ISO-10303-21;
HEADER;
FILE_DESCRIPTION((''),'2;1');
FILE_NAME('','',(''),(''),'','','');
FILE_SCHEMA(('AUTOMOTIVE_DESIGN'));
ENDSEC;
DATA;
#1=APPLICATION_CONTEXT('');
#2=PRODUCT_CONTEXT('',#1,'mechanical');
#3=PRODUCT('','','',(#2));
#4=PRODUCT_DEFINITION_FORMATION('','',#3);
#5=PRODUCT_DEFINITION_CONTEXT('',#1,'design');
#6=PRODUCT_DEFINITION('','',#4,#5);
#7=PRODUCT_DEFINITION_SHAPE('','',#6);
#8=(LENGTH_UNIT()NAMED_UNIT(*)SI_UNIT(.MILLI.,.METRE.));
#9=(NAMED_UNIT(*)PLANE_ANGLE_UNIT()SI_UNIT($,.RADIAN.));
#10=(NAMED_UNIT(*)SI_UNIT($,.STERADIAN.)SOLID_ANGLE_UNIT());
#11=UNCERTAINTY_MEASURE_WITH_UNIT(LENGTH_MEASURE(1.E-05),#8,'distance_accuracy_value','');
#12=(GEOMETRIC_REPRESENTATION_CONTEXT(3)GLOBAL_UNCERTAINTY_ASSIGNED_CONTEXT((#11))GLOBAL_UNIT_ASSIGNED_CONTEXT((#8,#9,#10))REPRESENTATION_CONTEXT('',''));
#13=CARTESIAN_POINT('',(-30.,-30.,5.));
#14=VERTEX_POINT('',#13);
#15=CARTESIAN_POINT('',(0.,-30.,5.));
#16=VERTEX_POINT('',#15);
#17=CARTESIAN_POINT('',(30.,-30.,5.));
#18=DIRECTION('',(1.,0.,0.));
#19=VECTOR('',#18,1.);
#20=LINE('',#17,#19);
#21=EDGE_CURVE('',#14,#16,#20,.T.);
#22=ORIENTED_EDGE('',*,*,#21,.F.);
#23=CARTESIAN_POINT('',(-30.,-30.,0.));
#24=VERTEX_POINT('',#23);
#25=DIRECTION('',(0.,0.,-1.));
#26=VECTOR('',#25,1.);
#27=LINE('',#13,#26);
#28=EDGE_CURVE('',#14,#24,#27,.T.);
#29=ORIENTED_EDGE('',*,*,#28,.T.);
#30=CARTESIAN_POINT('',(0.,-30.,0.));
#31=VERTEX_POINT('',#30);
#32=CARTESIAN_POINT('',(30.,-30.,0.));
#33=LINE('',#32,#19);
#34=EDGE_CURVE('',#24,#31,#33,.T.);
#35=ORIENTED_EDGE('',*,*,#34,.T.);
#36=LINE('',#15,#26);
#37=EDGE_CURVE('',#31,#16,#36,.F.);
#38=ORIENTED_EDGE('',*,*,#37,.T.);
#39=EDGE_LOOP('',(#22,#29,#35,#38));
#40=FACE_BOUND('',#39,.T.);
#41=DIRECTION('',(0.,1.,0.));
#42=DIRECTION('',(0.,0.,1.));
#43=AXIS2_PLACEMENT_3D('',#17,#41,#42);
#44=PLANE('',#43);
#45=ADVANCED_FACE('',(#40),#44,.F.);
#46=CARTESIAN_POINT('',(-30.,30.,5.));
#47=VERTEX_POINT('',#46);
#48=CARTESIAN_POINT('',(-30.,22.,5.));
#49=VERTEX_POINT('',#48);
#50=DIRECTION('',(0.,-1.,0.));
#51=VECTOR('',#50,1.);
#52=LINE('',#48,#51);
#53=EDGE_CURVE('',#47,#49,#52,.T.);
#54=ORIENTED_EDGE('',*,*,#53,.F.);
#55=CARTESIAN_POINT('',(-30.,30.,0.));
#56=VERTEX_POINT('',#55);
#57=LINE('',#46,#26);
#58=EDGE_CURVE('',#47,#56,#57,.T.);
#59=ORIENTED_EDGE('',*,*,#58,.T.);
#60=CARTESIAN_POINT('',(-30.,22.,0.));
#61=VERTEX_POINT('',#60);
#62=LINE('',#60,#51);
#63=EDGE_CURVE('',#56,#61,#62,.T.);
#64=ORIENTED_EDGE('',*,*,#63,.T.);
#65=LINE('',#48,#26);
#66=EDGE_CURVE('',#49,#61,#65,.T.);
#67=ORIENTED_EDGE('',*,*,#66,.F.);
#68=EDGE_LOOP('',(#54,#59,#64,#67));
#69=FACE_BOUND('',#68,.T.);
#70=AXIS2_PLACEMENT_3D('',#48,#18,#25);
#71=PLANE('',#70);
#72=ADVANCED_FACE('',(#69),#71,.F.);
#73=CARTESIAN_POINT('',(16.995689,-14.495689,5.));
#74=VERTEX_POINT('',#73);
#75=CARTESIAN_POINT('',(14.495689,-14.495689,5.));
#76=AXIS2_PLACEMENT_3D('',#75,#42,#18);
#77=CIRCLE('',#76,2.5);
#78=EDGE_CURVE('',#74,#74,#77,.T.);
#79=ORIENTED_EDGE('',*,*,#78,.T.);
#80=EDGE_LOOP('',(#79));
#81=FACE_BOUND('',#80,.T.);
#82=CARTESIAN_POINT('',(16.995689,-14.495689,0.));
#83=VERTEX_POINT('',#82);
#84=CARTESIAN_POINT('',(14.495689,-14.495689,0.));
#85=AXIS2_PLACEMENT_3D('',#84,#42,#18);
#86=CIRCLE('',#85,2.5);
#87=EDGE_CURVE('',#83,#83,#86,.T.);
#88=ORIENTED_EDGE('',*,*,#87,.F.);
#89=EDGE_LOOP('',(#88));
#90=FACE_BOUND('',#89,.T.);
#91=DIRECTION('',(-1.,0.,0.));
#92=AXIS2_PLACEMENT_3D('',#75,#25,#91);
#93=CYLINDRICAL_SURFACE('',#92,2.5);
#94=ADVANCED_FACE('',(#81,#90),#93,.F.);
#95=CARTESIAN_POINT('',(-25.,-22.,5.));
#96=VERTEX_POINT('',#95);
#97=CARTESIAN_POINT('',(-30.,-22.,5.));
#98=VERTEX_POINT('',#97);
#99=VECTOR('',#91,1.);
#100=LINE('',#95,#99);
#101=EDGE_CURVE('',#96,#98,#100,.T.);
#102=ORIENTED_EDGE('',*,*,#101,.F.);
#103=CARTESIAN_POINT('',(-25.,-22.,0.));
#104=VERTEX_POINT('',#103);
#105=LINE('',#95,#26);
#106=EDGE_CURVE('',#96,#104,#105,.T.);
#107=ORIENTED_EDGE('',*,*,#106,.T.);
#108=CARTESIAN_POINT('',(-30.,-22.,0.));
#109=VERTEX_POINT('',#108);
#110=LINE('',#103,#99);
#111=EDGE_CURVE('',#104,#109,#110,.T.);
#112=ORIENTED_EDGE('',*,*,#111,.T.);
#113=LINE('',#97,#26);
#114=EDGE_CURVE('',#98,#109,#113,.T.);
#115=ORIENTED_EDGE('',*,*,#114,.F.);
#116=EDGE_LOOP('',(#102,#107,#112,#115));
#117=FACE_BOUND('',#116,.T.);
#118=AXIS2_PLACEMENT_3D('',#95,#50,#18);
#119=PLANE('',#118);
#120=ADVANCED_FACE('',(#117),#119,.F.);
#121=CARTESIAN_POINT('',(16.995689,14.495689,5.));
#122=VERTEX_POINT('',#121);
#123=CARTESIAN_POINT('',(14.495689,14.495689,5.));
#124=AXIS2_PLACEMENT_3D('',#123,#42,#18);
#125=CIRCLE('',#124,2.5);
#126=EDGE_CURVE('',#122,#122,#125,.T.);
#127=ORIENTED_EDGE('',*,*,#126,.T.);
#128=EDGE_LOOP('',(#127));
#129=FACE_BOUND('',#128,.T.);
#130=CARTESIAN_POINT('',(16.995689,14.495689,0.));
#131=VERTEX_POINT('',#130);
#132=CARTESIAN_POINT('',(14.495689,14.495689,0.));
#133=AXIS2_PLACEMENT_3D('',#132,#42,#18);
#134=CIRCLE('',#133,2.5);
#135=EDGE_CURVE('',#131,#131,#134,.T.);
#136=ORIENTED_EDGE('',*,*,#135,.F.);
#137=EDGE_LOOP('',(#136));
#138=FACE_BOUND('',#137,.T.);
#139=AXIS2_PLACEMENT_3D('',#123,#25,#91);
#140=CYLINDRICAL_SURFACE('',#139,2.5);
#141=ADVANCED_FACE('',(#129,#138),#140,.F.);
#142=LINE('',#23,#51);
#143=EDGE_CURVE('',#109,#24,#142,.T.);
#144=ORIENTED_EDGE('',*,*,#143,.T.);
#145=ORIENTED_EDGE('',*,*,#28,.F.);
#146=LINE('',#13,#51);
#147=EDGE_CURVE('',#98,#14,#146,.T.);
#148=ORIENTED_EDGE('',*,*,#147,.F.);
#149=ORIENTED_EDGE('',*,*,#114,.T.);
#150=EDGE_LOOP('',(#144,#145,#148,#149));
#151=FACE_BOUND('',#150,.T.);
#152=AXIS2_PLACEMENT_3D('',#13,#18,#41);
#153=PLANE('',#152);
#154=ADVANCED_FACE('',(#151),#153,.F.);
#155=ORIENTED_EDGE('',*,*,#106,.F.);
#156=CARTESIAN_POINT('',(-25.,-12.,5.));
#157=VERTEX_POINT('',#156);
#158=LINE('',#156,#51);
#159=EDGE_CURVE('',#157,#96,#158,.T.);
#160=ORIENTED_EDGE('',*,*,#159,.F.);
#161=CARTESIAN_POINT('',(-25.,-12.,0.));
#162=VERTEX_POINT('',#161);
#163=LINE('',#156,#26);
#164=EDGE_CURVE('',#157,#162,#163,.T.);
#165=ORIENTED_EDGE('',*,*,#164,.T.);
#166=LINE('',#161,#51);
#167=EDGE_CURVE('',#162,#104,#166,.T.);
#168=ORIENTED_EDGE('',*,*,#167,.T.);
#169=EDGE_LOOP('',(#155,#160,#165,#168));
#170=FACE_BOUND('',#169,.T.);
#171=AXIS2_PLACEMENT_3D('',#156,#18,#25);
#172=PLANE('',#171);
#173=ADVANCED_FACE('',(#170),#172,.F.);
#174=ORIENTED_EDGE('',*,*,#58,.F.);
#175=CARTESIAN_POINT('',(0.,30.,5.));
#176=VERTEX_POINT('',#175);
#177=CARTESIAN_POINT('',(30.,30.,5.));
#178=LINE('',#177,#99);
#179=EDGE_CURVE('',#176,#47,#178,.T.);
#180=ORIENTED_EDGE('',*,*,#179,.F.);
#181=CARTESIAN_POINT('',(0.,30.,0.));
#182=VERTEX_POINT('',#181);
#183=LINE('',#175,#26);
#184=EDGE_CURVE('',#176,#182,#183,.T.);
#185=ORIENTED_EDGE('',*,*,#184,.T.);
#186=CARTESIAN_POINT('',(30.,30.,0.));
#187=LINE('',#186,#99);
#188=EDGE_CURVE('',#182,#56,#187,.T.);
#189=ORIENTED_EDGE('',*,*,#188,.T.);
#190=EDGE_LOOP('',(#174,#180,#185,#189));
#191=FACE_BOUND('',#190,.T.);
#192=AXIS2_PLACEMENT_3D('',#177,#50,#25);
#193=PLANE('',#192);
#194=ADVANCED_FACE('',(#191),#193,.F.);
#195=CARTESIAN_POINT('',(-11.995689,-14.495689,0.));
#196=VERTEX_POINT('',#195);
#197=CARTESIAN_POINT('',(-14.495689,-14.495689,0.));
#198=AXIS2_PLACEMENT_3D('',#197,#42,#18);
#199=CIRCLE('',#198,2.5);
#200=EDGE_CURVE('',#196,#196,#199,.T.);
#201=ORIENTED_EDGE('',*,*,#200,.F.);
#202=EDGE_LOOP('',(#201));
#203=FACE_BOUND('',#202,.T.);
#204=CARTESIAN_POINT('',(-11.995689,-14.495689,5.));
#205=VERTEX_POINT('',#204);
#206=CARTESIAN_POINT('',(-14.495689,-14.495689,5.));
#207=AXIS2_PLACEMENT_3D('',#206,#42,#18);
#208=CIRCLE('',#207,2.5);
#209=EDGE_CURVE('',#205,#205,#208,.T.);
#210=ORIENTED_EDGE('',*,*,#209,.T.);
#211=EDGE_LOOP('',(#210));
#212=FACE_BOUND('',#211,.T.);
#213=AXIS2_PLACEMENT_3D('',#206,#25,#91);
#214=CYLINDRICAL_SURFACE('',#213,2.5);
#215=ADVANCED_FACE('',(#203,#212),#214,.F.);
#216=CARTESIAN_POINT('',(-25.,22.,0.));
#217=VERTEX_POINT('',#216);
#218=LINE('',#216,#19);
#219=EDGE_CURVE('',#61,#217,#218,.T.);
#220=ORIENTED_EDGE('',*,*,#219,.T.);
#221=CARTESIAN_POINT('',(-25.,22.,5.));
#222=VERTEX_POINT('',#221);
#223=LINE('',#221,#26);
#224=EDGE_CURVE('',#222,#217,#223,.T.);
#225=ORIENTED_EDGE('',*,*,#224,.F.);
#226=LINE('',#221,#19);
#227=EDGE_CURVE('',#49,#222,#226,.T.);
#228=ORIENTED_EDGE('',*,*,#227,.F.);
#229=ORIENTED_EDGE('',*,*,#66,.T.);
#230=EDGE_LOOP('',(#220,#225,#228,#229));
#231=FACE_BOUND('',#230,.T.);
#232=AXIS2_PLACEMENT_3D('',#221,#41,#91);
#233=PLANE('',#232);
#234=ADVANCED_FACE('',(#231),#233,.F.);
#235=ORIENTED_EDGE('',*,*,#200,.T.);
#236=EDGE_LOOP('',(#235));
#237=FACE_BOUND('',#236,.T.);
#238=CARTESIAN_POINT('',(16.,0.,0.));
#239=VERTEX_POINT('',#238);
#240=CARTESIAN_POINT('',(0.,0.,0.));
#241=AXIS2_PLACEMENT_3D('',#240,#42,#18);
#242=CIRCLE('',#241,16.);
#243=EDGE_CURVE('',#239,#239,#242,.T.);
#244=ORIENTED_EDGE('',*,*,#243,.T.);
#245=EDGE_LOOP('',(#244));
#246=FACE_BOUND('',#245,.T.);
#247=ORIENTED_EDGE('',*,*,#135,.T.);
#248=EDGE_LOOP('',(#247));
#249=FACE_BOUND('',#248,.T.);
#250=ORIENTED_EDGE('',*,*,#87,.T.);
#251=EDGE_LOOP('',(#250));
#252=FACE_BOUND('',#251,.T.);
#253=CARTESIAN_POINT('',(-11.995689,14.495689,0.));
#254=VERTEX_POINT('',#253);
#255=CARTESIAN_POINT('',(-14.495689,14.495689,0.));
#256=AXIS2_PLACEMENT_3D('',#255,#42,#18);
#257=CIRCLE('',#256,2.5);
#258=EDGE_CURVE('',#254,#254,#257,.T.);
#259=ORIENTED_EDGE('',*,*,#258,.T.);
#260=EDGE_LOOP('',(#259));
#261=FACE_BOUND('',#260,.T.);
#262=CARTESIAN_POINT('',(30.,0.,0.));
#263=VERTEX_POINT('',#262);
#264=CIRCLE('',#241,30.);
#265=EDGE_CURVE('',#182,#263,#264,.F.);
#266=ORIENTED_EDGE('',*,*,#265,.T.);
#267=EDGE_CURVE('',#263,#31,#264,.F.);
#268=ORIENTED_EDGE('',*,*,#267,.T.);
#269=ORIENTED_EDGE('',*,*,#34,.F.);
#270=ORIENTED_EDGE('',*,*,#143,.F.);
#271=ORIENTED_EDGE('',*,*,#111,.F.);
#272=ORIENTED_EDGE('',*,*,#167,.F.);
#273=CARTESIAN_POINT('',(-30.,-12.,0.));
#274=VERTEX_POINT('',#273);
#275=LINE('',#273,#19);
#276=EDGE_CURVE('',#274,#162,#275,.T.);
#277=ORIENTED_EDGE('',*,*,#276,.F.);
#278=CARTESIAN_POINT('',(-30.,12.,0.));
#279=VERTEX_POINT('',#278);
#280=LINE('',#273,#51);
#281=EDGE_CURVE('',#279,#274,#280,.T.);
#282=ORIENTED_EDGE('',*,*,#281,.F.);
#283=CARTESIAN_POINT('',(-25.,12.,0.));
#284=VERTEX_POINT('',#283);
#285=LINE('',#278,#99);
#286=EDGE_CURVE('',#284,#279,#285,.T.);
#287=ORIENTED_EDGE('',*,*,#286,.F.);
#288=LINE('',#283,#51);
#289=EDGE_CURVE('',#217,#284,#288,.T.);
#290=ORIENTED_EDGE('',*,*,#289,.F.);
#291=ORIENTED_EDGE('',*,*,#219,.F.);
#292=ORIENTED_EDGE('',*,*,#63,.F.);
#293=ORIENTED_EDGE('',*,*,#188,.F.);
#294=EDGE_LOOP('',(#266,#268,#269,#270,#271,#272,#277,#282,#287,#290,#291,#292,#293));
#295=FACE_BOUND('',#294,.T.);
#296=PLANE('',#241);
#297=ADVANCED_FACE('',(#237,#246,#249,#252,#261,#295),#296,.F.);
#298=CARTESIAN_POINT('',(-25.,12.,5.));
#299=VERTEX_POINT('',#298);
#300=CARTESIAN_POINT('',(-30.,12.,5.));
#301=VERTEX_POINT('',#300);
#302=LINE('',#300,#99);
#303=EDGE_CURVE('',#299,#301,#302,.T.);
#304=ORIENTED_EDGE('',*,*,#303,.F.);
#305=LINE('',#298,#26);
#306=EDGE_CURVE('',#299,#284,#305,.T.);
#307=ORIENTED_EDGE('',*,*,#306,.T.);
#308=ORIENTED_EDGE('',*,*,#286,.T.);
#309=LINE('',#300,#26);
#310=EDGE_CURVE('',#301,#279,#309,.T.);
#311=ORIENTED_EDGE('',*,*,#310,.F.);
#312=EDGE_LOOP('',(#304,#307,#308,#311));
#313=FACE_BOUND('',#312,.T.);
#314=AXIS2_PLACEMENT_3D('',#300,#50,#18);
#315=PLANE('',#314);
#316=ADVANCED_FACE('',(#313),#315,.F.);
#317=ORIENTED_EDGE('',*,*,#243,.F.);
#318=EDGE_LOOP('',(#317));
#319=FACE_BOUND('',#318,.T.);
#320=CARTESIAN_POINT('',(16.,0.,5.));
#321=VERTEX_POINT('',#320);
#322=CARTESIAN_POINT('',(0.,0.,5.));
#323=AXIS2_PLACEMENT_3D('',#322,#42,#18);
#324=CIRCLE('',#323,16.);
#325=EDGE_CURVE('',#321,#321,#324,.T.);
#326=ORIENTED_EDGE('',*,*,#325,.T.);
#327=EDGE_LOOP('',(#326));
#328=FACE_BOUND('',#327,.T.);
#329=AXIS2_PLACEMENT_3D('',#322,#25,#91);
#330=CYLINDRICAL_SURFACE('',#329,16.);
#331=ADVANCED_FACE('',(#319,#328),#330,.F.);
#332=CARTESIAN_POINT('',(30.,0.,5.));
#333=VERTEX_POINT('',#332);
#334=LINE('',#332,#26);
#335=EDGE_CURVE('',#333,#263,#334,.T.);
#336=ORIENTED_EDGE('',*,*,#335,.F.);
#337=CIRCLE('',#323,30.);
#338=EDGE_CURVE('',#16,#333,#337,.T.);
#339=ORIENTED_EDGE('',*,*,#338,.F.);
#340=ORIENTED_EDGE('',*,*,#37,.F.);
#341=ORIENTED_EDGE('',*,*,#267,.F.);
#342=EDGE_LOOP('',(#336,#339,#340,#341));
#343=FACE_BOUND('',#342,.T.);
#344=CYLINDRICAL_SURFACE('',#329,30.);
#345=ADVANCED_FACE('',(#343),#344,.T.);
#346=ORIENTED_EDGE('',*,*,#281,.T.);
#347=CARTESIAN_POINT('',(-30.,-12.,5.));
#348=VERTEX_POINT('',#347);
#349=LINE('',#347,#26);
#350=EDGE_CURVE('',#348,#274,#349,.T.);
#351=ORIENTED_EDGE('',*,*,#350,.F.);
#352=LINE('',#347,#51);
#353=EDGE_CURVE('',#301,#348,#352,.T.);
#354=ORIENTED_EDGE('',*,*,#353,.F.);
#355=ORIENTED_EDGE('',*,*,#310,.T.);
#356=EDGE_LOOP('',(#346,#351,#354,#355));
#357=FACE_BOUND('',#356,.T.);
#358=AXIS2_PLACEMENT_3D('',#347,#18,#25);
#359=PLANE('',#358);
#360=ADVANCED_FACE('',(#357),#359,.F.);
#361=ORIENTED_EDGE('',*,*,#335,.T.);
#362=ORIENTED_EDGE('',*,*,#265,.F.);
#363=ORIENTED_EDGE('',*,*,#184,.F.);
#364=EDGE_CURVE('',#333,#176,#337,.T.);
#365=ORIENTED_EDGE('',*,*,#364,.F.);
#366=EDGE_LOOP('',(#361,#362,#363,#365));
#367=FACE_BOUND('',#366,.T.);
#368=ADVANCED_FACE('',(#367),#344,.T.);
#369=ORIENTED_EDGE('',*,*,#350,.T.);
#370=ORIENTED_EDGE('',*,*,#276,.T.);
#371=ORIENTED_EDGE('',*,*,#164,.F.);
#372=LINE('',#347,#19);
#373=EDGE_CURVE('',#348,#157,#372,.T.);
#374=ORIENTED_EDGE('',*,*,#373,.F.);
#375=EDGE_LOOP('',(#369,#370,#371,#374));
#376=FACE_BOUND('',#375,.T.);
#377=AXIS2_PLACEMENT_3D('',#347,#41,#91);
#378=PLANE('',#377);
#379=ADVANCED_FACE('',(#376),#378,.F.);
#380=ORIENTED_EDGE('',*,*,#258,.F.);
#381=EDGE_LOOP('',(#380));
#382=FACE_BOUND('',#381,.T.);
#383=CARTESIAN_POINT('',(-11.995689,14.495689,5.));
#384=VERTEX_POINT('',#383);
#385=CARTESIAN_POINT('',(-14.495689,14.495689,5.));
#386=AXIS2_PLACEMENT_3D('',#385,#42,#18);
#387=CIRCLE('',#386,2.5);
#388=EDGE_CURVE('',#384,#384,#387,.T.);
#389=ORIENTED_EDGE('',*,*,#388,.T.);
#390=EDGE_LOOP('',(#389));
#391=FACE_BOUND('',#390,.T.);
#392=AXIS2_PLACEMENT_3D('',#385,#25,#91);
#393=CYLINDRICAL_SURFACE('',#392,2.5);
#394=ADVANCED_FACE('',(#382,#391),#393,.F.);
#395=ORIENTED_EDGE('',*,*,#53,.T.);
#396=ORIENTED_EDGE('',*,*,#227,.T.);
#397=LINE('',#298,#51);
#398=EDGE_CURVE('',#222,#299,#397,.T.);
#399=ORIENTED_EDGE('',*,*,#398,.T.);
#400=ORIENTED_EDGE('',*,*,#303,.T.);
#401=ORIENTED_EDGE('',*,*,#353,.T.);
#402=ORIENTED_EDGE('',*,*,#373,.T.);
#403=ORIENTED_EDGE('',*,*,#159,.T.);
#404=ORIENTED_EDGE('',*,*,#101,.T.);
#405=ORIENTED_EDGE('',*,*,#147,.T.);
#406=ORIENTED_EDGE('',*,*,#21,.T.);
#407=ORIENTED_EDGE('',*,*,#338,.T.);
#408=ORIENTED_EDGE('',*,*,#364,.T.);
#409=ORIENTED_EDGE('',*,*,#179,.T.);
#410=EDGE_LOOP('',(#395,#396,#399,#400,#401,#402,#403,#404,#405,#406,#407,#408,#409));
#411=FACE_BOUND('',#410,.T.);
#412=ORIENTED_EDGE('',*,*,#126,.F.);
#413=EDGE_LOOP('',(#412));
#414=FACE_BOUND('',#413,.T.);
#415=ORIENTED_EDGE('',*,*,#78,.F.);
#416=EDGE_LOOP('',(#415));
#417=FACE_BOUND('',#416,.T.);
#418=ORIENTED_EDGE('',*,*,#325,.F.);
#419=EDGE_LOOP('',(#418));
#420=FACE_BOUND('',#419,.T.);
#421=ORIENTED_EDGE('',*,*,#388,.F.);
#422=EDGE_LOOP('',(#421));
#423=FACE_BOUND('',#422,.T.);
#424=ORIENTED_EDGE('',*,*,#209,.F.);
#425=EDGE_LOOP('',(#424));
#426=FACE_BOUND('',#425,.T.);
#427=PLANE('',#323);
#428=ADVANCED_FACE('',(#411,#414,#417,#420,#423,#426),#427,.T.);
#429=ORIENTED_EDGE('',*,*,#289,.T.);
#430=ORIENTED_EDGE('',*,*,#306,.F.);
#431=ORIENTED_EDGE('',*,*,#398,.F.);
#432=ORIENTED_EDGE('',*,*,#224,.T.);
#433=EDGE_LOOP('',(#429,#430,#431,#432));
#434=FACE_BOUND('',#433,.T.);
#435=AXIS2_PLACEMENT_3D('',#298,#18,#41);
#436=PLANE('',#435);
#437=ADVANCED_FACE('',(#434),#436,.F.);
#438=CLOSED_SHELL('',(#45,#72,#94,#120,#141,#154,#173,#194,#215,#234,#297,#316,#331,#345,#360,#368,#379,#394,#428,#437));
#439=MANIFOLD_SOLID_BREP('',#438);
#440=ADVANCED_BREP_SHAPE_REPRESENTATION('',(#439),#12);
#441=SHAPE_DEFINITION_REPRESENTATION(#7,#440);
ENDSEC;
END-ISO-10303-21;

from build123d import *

# Parameters (mm, degrees)
SKETCH1_R           = 16
SKETCH1_R_2         = 2.5
BOSS_EXTRUDE1_DEPTH = 5
FILLET1_R           = 30


with BuildPart() as part:
    # Sketch1 → Boss-Extrude1 (new body)
    with BuildSketch(Plane(origin=(0, 0, 0), x_dir=(0, 1, 0), z_dir=(0, 0, 1))):
        Polygon((-30, -30), (30, -30), (30, 30), (22, 30), (22, 25), (12, 25), (12, 30), (-12, 30), (-12, 25), (-22, 25), (-22, 30), (-30, 30), align=None)
        with Locations(Location((0, 0, 0), (0, 0, 270))):
            Circle(SKETCH1_R, mode=Mode.SUBTRACT)
        with Locations(Location((14.495689014, 14.495689014, 0), (0, 0, 270))):
            Circle(SKETCH1_R_2, mode=Mode.SUBTRACT)
        with Locations(Location((14.495689014, -14.495689014, 0), (0, 0, 270))):
            Circle(SKETCH1_R_2, mode=Mode.SUBTRACT)
        with Locations(Location((-14.495689014, -14.495689014, 0), (0, 0, 270))):
            Circle(SKETCH1_R_2, mode=Mode.SUBTRACT)
        with Locations(Location((-14.495689014, 14.495689014, 0), (0, 0, 270))):
            Circle(SKETCH1_R_2, mode=Mode.SUBTRACT)
    extrude(amount=BOSS_EXTRUDE1_DEPTH)

    # Fillet1
    fillet1_edges = [part.edges().sort_by_distance(p)[0] for p in [
        (30, 30, 2.5),
        (30, -30, 2.5),
    ]]
    fillet(fillet1_edges, radius=FILLET1_R - 0.0001)  # a hair under: the kernel refuses the full size


solid = part.part
